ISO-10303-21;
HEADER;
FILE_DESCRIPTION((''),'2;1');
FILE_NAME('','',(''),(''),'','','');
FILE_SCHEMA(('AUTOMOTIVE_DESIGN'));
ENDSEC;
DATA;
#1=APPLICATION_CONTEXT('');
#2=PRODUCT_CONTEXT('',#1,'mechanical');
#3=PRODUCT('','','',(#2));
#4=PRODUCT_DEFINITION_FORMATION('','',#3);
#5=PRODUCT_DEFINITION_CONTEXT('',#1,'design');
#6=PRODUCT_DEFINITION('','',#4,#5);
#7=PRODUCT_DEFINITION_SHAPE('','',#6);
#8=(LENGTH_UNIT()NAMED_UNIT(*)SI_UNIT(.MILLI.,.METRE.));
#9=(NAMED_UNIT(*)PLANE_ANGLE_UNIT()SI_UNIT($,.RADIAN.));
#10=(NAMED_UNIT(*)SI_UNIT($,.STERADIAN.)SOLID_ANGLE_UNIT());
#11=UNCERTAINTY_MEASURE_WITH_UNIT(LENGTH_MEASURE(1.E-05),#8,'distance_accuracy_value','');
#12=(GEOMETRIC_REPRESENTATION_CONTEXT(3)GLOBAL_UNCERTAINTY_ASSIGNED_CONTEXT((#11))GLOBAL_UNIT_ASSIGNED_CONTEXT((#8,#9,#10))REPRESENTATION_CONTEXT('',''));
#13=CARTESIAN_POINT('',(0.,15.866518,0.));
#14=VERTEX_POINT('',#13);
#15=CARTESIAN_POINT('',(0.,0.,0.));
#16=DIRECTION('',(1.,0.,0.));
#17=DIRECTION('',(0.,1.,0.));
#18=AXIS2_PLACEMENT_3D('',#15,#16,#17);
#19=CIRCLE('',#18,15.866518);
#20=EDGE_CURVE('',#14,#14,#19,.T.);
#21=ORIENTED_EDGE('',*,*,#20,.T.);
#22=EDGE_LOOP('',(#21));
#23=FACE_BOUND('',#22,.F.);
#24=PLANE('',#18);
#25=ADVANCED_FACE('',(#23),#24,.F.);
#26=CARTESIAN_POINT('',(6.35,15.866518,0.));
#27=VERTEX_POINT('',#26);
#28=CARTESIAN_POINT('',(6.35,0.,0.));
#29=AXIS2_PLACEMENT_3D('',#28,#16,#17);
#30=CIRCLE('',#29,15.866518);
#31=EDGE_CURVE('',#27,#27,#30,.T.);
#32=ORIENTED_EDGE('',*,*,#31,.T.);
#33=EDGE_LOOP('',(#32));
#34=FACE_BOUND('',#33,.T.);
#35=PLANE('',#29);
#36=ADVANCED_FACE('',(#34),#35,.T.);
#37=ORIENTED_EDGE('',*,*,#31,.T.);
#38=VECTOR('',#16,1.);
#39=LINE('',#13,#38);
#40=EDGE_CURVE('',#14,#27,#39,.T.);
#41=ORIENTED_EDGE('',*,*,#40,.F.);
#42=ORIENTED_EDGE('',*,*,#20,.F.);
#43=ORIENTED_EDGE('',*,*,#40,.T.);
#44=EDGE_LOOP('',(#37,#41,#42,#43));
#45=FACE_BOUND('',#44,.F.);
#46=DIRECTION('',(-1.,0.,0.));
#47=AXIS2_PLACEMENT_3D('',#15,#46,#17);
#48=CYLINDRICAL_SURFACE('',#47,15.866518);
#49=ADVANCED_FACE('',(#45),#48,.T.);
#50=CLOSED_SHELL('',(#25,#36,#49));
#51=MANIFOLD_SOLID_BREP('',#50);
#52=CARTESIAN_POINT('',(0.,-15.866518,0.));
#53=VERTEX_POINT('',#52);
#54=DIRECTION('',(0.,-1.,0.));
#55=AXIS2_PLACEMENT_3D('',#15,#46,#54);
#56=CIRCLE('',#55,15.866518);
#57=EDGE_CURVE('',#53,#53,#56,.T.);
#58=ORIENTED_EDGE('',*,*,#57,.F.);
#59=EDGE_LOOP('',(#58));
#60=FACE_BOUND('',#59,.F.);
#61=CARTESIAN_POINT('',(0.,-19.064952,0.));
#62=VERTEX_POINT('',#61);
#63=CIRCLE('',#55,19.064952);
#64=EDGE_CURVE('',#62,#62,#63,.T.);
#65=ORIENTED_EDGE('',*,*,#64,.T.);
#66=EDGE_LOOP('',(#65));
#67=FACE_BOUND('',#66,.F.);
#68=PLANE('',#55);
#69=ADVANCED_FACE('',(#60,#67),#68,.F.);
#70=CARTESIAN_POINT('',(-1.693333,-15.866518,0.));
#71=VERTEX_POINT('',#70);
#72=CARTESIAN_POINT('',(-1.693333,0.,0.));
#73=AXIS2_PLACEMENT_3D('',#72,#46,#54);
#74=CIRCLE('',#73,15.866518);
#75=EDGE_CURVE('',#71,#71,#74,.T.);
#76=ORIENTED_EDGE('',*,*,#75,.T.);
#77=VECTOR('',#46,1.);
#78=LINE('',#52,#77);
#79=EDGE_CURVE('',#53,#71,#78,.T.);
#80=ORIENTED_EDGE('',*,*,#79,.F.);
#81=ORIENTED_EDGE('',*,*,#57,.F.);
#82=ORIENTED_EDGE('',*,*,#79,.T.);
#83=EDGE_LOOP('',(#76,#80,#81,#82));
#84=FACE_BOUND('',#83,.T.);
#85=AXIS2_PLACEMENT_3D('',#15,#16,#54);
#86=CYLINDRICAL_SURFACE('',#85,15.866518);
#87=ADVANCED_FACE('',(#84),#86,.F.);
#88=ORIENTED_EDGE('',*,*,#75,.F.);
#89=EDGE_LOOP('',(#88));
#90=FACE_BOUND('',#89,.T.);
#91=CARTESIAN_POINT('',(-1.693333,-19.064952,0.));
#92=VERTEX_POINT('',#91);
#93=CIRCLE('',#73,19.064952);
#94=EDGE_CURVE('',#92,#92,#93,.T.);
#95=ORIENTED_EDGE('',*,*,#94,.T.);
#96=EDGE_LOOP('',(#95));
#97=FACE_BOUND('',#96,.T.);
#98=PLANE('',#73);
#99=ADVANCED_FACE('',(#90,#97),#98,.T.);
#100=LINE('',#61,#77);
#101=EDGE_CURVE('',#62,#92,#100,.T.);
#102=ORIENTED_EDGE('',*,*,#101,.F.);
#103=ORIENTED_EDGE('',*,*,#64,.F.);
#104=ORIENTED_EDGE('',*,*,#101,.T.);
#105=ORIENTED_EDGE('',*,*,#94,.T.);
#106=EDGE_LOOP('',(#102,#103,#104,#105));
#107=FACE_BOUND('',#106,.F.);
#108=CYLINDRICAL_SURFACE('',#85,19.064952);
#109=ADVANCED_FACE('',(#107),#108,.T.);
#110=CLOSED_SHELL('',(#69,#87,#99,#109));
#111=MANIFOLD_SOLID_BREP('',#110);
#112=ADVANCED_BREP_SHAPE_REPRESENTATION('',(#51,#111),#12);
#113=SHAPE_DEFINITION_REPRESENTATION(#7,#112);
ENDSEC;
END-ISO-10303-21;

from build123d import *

# Parameters (mm, degrees)
F0_R     = 15.8665178104
F1_DEPTH = 6.35
F2_R     = 19.064952095
F2_R_2   = 15.8665178104
F3_DEPTH = 1.6933333333


# Not quite as in the source:
# - a length typed as a fraction of an inch, garbled in the dataset ("3 / 203.2 mm" for 3/8 in), is restored


with BuildPart() as f1:
    # F0 (on Right) → F1 (new body)
    with BuildSketch(Plane.YZ):
        Circle(F0_R)
    extrude(amount=F1_DEPTH)


with BuildPart() as f3:
    # F2 (on face) → F3 (new body)
    with BuildSketch(Plane(origin=(0, 0, 0), x_dir=(0, -1, 0), z_dir=(-1, 0, 0))):
        Circle(F2_R)
        Circle(F2_R_2, mode=Mode.SUBTRACT)
    extrude(amount=F3_DEPTH)


solid = Compound([f1.part, f3.part])
